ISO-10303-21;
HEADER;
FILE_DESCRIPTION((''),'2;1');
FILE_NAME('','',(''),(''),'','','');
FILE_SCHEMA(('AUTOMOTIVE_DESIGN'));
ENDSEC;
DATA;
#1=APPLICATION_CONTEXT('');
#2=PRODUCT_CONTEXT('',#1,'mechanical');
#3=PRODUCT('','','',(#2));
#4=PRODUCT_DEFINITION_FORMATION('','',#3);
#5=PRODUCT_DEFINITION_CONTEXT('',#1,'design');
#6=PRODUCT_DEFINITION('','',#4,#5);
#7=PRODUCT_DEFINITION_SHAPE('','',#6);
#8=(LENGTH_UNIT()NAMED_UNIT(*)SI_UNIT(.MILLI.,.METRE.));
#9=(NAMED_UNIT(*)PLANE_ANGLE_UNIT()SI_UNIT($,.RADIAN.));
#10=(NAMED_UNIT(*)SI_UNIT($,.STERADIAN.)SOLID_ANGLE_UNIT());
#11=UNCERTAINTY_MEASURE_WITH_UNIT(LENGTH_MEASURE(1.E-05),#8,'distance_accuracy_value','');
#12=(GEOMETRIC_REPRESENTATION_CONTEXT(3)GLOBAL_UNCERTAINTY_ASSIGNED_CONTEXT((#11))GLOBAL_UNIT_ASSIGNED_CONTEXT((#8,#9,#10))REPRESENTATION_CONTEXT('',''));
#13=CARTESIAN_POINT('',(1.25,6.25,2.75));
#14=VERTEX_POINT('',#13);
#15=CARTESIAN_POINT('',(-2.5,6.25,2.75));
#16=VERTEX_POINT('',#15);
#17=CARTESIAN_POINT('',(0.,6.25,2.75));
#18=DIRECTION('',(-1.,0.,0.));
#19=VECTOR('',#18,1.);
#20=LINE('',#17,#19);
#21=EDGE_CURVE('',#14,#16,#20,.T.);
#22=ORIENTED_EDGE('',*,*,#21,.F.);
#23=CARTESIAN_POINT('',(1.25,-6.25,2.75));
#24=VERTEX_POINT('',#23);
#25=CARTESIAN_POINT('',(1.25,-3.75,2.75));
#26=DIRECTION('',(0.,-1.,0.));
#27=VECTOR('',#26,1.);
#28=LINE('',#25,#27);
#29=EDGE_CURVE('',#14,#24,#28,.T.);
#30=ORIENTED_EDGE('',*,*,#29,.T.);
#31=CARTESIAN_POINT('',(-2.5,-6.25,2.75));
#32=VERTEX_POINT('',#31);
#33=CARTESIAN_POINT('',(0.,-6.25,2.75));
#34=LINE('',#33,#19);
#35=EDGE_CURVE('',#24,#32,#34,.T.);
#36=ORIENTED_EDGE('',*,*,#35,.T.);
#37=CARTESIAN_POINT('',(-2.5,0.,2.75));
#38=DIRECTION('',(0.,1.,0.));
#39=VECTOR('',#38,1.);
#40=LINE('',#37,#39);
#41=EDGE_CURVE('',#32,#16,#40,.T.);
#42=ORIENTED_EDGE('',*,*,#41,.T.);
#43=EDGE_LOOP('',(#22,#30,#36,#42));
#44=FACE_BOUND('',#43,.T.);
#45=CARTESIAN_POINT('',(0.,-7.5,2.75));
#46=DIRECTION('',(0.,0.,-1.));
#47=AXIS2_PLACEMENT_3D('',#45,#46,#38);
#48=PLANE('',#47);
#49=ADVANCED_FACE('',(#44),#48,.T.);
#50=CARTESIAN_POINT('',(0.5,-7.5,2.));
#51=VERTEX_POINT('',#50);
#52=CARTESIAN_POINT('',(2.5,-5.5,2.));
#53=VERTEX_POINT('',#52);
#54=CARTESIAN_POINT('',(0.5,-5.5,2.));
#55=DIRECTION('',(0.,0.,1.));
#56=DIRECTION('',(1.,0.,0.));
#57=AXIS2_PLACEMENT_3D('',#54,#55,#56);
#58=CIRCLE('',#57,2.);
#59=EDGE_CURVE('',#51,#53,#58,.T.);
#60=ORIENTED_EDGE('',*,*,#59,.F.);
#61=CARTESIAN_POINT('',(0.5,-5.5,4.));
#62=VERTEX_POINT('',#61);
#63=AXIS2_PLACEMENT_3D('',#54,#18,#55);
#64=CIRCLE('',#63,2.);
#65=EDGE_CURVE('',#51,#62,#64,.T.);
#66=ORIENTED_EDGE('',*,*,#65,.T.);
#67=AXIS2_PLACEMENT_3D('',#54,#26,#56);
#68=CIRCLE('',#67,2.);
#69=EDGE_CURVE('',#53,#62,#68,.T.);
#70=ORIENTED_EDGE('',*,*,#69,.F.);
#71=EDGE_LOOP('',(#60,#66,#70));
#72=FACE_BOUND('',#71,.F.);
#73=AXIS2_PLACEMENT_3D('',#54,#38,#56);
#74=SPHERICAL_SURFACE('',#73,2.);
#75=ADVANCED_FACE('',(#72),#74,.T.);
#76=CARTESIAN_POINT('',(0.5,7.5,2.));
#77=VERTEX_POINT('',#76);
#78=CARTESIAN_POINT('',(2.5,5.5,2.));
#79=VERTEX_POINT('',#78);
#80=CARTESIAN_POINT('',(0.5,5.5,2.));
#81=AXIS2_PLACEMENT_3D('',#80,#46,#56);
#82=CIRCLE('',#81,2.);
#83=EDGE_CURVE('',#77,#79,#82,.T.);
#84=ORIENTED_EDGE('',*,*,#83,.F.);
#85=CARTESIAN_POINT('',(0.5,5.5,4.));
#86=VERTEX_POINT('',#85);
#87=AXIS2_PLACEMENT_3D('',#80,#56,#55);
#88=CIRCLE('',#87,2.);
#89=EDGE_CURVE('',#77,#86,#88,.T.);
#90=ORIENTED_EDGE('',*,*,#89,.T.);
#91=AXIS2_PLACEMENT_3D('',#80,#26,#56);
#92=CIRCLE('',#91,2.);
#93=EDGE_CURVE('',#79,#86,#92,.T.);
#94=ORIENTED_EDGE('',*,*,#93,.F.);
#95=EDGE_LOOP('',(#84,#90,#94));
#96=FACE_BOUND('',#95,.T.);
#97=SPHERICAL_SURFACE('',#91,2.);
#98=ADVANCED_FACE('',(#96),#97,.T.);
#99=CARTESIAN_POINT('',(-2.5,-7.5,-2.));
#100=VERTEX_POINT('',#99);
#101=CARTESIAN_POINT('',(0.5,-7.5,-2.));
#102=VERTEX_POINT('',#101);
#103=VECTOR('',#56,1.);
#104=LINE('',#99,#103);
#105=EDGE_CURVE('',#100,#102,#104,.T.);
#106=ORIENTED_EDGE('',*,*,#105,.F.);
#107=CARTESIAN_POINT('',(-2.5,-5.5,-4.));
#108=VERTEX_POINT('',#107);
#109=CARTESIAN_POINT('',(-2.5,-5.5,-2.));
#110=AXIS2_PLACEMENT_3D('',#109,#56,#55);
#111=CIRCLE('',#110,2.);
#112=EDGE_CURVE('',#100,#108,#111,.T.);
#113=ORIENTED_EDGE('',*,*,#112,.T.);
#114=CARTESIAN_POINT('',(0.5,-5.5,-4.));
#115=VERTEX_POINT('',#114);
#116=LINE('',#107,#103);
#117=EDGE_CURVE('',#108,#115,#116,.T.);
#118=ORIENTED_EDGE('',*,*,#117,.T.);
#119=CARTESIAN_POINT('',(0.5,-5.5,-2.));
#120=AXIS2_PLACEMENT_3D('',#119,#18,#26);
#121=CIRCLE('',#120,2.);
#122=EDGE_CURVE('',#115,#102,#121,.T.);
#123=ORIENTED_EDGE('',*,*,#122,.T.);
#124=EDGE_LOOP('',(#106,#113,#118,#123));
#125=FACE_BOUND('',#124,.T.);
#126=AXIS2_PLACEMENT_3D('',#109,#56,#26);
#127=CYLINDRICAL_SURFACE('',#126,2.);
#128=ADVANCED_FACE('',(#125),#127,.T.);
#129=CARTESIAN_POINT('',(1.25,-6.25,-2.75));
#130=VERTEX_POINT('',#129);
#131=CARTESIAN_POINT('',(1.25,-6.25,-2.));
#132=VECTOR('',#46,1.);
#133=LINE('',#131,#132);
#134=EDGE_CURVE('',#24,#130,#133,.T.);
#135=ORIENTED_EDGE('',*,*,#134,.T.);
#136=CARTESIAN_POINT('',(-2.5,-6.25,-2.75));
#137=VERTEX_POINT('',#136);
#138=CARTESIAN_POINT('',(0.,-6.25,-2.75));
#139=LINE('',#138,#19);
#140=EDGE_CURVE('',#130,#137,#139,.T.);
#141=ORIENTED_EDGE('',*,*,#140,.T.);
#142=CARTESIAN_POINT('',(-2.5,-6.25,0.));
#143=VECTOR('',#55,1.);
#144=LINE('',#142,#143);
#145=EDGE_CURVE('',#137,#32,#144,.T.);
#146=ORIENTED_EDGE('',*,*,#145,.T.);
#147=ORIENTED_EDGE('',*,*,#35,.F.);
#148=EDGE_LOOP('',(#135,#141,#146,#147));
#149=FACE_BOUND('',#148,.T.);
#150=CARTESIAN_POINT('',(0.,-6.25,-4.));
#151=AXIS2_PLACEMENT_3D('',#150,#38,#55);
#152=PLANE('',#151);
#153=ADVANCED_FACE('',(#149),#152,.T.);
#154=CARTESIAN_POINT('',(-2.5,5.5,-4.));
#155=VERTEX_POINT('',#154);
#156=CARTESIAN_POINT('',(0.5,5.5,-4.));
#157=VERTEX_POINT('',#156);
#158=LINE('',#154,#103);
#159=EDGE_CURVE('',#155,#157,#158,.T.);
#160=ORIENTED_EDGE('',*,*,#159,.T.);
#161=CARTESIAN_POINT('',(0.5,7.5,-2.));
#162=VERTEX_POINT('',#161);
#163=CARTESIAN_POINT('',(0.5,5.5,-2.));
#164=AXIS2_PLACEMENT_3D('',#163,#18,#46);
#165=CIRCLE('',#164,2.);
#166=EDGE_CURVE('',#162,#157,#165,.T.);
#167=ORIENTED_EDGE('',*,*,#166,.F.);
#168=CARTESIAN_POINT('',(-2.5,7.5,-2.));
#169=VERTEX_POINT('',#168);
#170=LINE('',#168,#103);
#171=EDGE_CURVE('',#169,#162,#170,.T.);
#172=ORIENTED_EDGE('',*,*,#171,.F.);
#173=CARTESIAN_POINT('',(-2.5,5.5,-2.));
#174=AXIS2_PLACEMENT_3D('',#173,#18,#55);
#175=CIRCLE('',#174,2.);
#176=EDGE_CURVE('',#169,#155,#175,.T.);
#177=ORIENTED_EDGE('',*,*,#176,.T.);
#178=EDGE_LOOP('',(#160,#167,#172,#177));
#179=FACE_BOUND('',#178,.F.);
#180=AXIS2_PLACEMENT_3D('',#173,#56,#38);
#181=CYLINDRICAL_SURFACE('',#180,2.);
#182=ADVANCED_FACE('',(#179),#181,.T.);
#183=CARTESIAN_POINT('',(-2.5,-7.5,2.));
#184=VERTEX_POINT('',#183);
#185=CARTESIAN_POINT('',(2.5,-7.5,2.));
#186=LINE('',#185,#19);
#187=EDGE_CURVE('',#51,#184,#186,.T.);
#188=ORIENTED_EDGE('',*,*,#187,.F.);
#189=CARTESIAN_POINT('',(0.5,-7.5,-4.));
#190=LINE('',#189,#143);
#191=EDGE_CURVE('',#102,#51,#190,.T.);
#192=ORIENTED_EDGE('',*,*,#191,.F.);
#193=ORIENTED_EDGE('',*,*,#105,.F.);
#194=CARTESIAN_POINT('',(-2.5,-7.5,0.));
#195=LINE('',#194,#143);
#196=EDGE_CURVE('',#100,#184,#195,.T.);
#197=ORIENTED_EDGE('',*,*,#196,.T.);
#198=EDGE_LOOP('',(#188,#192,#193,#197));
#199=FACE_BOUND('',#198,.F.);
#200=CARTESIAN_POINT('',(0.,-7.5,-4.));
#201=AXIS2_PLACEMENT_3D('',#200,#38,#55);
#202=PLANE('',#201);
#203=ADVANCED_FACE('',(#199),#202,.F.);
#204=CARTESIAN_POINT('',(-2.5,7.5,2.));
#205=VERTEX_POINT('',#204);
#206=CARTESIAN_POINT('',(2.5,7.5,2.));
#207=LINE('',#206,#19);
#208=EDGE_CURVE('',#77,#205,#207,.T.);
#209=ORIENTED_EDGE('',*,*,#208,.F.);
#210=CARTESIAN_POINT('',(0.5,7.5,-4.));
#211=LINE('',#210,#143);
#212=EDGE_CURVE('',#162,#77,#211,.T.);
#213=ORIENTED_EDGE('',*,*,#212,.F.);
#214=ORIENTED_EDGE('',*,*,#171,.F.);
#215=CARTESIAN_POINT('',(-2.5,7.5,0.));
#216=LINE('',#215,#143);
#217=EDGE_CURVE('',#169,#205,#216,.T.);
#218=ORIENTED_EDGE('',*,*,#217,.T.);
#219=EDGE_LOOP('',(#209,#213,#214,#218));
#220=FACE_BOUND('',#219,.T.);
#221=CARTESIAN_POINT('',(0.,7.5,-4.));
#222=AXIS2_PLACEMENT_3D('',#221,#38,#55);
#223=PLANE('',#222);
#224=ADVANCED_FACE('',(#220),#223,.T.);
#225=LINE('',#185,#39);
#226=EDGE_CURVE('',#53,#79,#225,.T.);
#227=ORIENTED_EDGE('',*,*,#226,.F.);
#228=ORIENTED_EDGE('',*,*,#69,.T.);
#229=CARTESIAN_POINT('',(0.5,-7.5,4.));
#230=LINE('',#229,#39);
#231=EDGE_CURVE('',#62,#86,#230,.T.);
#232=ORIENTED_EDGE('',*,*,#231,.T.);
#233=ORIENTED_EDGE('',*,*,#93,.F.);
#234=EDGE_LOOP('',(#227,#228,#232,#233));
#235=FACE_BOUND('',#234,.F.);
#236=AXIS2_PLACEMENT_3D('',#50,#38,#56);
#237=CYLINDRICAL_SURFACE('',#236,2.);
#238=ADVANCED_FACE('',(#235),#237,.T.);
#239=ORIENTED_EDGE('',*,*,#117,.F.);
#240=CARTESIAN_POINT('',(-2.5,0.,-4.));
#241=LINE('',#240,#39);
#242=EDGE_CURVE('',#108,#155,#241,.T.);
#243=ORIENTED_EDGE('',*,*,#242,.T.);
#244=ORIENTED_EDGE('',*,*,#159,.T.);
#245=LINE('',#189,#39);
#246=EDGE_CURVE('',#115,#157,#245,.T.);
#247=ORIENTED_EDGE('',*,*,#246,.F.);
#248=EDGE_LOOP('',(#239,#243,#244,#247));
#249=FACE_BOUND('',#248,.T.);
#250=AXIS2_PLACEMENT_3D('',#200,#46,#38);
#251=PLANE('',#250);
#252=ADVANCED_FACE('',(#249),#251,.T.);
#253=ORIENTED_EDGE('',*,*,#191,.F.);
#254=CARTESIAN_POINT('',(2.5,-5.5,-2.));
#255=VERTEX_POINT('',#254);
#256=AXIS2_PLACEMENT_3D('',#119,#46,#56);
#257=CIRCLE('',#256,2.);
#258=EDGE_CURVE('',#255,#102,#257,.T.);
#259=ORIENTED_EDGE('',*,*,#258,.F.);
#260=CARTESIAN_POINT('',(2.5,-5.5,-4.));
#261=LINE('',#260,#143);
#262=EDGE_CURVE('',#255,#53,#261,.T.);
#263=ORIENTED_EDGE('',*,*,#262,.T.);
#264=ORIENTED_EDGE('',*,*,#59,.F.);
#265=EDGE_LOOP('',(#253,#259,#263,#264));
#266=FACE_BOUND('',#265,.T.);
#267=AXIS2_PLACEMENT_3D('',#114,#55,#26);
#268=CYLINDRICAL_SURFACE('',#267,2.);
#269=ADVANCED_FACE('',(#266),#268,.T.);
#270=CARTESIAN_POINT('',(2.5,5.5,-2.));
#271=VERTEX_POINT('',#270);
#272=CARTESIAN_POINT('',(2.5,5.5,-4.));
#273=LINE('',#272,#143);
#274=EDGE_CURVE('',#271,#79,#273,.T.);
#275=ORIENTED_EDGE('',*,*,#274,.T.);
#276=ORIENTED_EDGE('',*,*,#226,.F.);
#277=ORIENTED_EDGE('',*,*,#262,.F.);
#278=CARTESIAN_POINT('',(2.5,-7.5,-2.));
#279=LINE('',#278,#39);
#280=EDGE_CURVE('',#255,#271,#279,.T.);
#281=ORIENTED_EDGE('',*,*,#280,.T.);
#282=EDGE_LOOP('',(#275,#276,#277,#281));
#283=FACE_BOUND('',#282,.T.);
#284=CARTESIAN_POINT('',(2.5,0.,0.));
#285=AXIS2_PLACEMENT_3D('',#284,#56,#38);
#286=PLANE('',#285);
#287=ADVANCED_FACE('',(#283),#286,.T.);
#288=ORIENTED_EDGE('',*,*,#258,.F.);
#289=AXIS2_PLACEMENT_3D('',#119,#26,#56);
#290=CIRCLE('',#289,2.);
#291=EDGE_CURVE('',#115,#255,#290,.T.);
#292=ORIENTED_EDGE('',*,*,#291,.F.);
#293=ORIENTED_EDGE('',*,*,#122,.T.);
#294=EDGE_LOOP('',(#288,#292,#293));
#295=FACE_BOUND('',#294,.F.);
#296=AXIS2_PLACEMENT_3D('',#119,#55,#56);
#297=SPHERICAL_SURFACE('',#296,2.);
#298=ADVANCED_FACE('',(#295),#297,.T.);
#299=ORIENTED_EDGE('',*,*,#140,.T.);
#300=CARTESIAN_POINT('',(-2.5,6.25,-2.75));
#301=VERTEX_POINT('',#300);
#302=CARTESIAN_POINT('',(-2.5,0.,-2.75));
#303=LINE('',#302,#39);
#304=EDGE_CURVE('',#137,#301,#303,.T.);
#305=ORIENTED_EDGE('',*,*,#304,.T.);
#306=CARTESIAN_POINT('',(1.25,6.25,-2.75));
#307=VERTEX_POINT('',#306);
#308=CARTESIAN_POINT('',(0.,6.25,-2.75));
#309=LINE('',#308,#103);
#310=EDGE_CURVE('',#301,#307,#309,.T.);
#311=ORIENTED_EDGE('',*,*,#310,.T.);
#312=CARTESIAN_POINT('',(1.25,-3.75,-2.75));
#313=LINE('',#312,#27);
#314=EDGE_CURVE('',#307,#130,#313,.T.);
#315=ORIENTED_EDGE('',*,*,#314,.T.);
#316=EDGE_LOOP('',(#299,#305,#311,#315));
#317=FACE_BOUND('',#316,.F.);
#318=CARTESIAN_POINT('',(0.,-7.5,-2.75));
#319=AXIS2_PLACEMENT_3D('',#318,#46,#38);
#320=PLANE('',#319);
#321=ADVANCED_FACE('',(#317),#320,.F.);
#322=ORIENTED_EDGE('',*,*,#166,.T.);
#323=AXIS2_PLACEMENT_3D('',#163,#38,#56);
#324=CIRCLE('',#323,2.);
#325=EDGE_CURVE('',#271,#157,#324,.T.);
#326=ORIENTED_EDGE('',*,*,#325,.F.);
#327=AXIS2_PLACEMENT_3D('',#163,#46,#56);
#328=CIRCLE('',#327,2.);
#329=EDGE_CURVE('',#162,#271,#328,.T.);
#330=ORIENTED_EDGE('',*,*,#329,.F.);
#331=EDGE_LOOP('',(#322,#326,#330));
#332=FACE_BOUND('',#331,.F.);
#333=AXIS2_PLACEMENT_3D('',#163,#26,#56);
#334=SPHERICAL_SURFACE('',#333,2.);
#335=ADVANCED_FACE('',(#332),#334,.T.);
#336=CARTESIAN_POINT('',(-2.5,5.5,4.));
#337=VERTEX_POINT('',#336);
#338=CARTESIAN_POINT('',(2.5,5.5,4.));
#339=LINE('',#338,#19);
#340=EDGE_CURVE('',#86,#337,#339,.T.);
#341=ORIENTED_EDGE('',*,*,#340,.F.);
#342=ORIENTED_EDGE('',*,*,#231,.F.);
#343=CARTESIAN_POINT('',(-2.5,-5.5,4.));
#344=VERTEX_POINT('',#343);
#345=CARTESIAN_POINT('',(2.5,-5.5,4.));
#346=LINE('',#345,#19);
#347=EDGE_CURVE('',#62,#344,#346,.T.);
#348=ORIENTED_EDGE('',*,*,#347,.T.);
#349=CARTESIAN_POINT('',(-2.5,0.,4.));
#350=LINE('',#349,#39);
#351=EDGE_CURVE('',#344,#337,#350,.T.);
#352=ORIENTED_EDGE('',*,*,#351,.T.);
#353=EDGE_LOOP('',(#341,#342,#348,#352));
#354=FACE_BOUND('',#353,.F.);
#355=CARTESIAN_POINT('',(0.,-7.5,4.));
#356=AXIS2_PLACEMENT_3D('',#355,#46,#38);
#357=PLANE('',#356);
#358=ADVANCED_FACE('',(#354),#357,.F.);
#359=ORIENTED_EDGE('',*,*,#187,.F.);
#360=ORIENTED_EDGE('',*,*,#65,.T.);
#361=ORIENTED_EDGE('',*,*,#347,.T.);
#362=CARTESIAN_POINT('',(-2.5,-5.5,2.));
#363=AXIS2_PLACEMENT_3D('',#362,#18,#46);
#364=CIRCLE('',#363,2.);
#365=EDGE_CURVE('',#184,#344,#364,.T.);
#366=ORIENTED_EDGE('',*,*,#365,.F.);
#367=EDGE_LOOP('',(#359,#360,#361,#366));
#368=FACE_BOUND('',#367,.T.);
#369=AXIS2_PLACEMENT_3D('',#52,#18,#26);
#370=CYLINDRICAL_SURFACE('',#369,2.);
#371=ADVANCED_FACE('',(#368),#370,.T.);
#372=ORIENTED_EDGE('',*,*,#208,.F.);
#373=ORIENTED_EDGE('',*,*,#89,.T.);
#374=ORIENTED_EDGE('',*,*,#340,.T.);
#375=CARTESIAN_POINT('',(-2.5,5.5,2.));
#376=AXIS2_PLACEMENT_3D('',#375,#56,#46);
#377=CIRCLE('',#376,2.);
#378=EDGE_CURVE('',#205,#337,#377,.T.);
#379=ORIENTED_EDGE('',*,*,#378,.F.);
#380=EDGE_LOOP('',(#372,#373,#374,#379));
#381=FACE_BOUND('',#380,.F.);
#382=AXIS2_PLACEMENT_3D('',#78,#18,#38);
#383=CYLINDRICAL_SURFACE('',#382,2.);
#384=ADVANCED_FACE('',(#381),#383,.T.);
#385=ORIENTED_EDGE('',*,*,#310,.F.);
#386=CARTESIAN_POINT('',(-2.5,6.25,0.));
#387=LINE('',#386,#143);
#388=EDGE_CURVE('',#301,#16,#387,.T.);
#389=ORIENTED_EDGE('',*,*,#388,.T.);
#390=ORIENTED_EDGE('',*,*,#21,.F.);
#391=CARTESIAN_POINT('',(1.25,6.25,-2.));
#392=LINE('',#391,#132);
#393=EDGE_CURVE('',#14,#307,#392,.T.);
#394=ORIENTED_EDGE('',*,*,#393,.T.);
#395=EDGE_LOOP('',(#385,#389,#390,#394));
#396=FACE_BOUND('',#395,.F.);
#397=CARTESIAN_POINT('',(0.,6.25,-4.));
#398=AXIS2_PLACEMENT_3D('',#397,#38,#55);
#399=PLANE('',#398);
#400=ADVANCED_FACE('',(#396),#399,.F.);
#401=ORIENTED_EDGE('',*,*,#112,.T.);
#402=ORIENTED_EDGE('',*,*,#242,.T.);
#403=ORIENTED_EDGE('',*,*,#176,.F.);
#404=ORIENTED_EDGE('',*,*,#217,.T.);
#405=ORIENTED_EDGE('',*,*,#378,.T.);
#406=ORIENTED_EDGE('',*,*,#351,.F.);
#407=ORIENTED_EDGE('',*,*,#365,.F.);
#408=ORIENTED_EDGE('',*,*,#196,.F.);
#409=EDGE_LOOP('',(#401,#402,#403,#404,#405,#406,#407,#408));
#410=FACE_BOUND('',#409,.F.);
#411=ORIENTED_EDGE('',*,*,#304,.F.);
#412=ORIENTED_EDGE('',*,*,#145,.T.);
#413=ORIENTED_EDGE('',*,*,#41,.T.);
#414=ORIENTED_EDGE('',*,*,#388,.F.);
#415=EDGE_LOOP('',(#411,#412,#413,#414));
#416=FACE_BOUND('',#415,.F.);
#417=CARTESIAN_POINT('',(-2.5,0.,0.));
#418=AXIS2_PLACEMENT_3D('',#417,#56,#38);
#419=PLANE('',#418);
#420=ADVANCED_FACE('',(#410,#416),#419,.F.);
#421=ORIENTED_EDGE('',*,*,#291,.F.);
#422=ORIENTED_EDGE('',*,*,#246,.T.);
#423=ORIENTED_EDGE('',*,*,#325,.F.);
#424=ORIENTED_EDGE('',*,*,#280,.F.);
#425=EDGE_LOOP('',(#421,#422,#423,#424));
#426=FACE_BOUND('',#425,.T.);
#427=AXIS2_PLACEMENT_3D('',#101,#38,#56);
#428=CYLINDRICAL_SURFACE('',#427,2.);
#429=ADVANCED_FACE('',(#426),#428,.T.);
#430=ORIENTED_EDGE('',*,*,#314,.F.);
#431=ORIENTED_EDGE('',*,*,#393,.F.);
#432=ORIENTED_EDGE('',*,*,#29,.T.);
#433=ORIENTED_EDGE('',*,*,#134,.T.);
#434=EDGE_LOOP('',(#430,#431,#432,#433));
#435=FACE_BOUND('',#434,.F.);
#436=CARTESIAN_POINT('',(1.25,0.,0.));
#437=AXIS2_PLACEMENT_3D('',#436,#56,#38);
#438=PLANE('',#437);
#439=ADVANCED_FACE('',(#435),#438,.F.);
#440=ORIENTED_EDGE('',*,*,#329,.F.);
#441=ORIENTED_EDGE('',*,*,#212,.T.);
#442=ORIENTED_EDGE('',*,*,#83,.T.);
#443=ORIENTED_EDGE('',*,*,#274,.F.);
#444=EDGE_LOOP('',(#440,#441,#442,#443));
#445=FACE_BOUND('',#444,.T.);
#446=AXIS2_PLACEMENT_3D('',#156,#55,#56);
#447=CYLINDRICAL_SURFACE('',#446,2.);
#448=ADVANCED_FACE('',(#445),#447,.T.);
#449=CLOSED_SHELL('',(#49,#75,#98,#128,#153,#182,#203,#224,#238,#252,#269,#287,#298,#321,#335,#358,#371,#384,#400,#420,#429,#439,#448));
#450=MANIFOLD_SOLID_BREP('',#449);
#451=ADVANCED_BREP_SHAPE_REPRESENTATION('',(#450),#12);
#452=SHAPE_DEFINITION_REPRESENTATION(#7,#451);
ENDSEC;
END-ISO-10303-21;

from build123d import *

# Parameters (mm, degrees)
F0_W     = 15
F0_H     = 8
F1_DEPTH = 2.5
F2_T     = -1.25
F3_R     = 2


# Not quite as in the source:
# - a feature names something its author has since deleted; it is built from what else it names


with BuildPart() as f1:
    # F0 (on Right) → F1 (new body, symmetric)
    with BuildSketch(Plane.YZ):
        Rectangle(F0_W, F0_H)
    extrude(amount=F1_DEPTH, both=True)

    # F2
    f2_openings = [f1.faces().sort_by_distance(p)[0] for p in [
        (-2.5, 0, 0),
    ]]
    offset(amount=F2_T, openings=f2_openings)

    # F3
    f3_edges = [f1.edges().sort_by_distance(p)[0] for p in [
        (2.5, 0, 4),
        (2.5, -7.5, 0),
        (2.5, 0, -4),
        (2.5, 7.5, 0),
        (0, -7.5, 4),
        (0, 7.5, 4),
        (0, 7.5, -4),
        (0, -7.5, -4),
    ]]
    fillet(f3_edges, radius=F3_R)


solid = f1.part
